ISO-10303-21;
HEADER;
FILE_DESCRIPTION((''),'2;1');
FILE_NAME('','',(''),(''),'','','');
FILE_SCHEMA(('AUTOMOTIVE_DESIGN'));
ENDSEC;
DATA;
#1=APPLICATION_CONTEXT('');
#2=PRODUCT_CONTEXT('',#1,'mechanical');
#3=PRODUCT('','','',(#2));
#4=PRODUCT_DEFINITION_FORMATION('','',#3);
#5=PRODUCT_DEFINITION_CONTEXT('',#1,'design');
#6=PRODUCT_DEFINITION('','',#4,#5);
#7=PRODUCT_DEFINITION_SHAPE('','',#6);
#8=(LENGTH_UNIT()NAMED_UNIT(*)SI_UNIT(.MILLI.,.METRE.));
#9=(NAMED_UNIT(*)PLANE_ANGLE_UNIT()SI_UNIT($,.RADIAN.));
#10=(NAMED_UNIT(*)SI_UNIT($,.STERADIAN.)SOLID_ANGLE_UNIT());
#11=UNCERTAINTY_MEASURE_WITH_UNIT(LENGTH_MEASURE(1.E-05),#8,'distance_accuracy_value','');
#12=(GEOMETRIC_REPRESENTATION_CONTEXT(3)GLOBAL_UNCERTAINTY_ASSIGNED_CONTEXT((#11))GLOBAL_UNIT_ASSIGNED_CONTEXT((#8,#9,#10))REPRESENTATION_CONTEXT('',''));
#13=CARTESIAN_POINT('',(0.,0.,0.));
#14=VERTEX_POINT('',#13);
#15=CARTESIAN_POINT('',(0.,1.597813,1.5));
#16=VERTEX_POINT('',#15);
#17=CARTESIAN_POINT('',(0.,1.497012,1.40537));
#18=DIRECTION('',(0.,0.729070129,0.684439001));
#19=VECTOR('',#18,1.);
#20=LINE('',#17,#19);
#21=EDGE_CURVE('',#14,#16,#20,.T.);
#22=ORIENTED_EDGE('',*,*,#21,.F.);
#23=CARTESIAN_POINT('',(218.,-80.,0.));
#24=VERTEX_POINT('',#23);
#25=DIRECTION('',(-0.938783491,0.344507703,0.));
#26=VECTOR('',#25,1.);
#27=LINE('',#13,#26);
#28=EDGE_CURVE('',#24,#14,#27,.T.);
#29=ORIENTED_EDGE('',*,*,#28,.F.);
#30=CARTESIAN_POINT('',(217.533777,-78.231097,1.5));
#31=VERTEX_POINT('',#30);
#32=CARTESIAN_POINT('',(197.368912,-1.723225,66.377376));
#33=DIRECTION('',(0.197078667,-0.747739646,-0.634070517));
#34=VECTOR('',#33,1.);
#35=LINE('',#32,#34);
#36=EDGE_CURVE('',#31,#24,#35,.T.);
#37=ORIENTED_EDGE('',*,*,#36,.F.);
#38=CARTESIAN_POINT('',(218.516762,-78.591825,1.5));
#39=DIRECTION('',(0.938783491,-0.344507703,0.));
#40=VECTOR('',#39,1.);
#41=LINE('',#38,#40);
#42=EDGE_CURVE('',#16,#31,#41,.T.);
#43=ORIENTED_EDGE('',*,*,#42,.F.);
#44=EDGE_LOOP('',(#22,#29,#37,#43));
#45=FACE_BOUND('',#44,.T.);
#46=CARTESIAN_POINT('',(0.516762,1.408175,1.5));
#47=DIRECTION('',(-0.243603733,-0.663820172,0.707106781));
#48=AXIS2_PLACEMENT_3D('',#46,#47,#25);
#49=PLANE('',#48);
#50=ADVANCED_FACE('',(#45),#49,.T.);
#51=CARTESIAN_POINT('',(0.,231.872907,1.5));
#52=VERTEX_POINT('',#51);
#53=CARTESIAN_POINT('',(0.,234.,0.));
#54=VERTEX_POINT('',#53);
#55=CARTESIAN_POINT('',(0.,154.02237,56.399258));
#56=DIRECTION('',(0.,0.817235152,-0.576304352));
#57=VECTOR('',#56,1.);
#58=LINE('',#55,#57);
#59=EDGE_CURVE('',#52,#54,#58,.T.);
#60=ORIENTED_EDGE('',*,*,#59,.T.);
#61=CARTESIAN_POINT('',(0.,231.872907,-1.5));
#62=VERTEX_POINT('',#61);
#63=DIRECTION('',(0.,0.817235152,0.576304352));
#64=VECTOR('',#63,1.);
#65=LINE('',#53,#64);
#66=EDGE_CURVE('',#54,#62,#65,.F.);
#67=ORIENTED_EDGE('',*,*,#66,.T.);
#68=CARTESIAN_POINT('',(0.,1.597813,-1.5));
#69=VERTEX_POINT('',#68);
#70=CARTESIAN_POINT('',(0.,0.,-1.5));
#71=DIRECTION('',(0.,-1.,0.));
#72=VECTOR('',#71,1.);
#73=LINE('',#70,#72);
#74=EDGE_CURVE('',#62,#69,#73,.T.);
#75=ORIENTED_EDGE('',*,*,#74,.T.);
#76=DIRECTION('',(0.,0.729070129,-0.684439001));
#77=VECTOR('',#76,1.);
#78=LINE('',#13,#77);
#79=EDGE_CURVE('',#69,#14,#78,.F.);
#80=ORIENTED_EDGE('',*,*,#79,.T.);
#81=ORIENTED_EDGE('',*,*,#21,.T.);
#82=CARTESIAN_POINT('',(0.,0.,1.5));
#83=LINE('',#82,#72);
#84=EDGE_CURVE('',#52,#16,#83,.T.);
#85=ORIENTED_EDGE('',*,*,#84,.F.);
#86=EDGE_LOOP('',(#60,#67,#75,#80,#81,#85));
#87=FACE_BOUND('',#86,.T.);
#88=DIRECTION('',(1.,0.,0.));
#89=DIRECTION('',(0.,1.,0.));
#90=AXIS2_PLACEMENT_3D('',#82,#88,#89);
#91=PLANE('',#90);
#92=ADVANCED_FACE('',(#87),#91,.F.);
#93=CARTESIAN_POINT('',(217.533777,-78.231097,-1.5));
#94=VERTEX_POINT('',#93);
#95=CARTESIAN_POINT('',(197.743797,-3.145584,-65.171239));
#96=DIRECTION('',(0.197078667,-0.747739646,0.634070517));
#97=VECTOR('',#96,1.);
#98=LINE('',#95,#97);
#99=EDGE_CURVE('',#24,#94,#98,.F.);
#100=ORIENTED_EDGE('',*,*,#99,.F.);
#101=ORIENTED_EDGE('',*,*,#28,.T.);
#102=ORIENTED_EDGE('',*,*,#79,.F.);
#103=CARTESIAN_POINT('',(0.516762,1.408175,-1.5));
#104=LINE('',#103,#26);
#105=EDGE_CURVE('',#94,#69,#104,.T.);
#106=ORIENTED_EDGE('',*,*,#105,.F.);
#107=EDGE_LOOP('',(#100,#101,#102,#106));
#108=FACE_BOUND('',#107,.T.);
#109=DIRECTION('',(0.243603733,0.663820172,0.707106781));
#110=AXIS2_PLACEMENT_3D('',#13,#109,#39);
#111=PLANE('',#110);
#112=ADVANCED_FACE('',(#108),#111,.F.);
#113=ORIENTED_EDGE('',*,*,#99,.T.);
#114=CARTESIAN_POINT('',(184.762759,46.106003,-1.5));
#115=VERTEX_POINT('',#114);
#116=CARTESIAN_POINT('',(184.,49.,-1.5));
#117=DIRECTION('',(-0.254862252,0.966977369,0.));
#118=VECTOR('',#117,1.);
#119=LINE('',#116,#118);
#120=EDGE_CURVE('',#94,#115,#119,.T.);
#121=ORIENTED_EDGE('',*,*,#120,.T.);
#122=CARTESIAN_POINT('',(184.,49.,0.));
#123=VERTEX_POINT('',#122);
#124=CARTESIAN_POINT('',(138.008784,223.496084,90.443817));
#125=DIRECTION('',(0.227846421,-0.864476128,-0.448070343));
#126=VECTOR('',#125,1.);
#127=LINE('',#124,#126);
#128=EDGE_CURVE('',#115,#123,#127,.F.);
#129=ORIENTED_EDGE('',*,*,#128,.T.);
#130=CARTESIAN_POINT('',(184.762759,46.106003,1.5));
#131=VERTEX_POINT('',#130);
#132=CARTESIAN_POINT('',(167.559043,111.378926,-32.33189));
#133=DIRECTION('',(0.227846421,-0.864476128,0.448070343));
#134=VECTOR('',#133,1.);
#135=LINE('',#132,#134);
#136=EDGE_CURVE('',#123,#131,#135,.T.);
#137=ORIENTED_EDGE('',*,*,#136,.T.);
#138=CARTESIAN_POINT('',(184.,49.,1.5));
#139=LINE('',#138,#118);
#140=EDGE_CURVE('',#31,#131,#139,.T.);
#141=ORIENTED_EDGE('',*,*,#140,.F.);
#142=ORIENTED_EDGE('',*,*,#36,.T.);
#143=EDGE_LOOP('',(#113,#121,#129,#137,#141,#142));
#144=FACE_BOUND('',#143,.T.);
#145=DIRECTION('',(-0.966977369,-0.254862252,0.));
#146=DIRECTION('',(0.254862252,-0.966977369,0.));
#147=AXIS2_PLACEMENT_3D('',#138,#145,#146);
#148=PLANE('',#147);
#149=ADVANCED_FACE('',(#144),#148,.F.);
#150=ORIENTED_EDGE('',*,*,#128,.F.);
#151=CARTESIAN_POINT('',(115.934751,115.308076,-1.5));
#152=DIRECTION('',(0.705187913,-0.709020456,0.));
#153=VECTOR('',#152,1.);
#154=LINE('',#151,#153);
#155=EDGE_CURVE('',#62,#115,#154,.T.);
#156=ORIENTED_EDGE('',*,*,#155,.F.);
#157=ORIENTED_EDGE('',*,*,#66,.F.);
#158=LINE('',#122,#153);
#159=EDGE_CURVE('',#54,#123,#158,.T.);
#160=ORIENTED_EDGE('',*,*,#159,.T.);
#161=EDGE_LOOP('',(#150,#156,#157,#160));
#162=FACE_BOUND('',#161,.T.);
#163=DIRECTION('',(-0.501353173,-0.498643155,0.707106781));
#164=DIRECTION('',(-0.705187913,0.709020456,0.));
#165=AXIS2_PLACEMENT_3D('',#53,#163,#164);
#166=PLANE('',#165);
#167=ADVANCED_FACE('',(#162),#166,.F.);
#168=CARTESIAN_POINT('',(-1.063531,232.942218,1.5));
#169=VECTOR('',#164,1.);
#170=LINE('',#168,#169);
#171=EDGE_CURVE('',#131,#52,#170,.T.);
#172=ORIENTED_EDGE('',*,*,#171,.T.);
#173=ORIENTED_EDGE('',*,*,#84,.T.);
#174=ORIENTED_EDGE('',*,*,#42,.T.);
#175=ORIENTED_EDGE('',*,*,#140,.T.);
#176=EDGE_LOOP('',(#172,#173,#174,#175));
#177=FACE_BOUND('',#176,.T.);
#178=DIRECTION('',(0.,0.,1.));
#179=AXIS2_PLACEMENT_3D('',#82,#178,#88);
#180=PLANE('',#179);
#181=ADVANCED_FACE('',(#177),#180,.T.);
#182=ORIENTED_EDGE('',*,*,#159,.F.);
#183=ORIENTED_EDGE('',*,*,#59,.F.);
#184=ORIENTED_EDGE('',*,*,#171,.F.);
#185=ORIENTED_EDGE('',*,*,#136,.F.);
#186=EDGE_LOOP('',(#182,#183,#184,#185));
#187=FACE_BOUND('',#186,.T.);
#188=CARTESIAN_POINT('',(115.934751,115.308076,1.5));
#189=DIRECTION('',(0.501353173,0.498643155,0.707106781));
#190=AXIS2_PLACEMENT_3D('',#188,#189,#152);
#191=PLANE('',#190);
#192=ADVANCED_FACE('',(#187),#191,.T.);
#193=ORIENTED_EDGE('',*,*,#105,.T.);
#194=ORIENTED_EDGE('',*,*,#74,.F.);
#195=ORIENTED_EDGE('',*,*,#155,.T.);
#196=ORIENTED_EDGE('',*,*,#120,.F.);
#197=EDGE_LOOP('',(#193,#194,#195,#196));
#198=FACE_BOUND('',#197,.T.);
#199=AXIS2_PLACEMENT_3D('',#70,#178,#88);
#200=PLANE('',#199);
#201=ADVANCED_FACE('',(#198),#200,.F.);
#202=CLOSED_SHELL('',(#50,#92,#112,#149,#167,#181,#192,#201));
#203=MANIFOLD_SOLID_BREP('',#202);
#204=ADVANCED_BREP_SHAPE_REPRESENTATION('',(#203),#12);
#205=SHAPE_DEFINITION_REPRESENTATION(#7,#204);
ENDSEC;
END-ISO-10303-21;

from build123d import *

# Parameters (mm, degrees)
BOSS_EXTRUDE1_DEPTH = 1.5
CHAMFER1_SIZE       = 1.5


with BuildPart() as part:
    # Sketch1 → Boss-Extrude1 (new, symmetric)
    with BuildSketch(Plane.XY):
        Polygon((0, 0), (0, 234), (184, 49), (218, -80), align=None)
    extrude(amount=BOSS_EXTRUDE1_DEPTH, both=True)

    # Chamfer1
    # the kernel refuses this chamfer: 1.5 mm, written as the material it takes off along each edge
    with BuildSketch(Plane(origin=(-2.720279639, 236.735063768, -1.5), x_dir=(0.01949513897586929, 0.01938975984627006, 0.9996219169112969), z_dir=(0.7051879131144355, -0.7090204561204898, 0)), Plane(origin=(-2.720279639, 236.735063768, 1.5), x_dir=(-0.708752387476486, -0.704921293490129, 0.027495876610586337), z_dir=(0.7051879131144355, -0.7090204561204898, 0))) as chamfer1_piece_1:
        Polygon((CHAMFER1_SIZE * 0.999621916911, CHAMFER1_SIZE * 0.0274958766106), (-CHAMFER1_SIZE * 0.0274958766106, CHAMFER1_SIZE * 0.999621916911), (0, 0), align=None)
    extrude(amount=268.638409359, mode=Mode.SUBTRACT)
    with BuildSketch(Plane(origin=(221.621380299, -81.328946899, -1.5), x_dir=(0.3443774504996801, 0.9384285526116285, -0.0274958766105866), z_dir=(-0.9387834907734437, 0.34450770303612605, 0))) as chamfer1_piece_2:
        Polygon((CHAMFER1_SIZE * 0.999621916911, -CHAMFER1_SIZE * 0.0274958766106), (-CHAMFER1_SIZE * 0.0274958766106, -CHAMFER1_SIZE * 0.999621916911), (0, 0), align=None)
    extrude(amount=239.930466195, mode=Mode.SUBTRACT)
    with BuildSketch(Plane(origin=(221.621380299, -81.328946899, 1.5), x_dir=(0.3443774504996801, 0.9384285526116285, 0.0274958766105866), z_dir=(-0.9387834907734437, 0.34450770303612605, 0))) as chamfer1_piece_3:
        Polygon((CHAMFER1_SIZE * 0.999621916911, CHAMFER1_SIZE * 0.0274958766106), (-CHAMFER1_SIZE * 0.0274958766106, CHAMFER1_SIZE * 0.999621916911), (0, 0), align=None)
    extrude(amount=239.930466195, mode=Mode.SUBTRACT)


solid = part.part
